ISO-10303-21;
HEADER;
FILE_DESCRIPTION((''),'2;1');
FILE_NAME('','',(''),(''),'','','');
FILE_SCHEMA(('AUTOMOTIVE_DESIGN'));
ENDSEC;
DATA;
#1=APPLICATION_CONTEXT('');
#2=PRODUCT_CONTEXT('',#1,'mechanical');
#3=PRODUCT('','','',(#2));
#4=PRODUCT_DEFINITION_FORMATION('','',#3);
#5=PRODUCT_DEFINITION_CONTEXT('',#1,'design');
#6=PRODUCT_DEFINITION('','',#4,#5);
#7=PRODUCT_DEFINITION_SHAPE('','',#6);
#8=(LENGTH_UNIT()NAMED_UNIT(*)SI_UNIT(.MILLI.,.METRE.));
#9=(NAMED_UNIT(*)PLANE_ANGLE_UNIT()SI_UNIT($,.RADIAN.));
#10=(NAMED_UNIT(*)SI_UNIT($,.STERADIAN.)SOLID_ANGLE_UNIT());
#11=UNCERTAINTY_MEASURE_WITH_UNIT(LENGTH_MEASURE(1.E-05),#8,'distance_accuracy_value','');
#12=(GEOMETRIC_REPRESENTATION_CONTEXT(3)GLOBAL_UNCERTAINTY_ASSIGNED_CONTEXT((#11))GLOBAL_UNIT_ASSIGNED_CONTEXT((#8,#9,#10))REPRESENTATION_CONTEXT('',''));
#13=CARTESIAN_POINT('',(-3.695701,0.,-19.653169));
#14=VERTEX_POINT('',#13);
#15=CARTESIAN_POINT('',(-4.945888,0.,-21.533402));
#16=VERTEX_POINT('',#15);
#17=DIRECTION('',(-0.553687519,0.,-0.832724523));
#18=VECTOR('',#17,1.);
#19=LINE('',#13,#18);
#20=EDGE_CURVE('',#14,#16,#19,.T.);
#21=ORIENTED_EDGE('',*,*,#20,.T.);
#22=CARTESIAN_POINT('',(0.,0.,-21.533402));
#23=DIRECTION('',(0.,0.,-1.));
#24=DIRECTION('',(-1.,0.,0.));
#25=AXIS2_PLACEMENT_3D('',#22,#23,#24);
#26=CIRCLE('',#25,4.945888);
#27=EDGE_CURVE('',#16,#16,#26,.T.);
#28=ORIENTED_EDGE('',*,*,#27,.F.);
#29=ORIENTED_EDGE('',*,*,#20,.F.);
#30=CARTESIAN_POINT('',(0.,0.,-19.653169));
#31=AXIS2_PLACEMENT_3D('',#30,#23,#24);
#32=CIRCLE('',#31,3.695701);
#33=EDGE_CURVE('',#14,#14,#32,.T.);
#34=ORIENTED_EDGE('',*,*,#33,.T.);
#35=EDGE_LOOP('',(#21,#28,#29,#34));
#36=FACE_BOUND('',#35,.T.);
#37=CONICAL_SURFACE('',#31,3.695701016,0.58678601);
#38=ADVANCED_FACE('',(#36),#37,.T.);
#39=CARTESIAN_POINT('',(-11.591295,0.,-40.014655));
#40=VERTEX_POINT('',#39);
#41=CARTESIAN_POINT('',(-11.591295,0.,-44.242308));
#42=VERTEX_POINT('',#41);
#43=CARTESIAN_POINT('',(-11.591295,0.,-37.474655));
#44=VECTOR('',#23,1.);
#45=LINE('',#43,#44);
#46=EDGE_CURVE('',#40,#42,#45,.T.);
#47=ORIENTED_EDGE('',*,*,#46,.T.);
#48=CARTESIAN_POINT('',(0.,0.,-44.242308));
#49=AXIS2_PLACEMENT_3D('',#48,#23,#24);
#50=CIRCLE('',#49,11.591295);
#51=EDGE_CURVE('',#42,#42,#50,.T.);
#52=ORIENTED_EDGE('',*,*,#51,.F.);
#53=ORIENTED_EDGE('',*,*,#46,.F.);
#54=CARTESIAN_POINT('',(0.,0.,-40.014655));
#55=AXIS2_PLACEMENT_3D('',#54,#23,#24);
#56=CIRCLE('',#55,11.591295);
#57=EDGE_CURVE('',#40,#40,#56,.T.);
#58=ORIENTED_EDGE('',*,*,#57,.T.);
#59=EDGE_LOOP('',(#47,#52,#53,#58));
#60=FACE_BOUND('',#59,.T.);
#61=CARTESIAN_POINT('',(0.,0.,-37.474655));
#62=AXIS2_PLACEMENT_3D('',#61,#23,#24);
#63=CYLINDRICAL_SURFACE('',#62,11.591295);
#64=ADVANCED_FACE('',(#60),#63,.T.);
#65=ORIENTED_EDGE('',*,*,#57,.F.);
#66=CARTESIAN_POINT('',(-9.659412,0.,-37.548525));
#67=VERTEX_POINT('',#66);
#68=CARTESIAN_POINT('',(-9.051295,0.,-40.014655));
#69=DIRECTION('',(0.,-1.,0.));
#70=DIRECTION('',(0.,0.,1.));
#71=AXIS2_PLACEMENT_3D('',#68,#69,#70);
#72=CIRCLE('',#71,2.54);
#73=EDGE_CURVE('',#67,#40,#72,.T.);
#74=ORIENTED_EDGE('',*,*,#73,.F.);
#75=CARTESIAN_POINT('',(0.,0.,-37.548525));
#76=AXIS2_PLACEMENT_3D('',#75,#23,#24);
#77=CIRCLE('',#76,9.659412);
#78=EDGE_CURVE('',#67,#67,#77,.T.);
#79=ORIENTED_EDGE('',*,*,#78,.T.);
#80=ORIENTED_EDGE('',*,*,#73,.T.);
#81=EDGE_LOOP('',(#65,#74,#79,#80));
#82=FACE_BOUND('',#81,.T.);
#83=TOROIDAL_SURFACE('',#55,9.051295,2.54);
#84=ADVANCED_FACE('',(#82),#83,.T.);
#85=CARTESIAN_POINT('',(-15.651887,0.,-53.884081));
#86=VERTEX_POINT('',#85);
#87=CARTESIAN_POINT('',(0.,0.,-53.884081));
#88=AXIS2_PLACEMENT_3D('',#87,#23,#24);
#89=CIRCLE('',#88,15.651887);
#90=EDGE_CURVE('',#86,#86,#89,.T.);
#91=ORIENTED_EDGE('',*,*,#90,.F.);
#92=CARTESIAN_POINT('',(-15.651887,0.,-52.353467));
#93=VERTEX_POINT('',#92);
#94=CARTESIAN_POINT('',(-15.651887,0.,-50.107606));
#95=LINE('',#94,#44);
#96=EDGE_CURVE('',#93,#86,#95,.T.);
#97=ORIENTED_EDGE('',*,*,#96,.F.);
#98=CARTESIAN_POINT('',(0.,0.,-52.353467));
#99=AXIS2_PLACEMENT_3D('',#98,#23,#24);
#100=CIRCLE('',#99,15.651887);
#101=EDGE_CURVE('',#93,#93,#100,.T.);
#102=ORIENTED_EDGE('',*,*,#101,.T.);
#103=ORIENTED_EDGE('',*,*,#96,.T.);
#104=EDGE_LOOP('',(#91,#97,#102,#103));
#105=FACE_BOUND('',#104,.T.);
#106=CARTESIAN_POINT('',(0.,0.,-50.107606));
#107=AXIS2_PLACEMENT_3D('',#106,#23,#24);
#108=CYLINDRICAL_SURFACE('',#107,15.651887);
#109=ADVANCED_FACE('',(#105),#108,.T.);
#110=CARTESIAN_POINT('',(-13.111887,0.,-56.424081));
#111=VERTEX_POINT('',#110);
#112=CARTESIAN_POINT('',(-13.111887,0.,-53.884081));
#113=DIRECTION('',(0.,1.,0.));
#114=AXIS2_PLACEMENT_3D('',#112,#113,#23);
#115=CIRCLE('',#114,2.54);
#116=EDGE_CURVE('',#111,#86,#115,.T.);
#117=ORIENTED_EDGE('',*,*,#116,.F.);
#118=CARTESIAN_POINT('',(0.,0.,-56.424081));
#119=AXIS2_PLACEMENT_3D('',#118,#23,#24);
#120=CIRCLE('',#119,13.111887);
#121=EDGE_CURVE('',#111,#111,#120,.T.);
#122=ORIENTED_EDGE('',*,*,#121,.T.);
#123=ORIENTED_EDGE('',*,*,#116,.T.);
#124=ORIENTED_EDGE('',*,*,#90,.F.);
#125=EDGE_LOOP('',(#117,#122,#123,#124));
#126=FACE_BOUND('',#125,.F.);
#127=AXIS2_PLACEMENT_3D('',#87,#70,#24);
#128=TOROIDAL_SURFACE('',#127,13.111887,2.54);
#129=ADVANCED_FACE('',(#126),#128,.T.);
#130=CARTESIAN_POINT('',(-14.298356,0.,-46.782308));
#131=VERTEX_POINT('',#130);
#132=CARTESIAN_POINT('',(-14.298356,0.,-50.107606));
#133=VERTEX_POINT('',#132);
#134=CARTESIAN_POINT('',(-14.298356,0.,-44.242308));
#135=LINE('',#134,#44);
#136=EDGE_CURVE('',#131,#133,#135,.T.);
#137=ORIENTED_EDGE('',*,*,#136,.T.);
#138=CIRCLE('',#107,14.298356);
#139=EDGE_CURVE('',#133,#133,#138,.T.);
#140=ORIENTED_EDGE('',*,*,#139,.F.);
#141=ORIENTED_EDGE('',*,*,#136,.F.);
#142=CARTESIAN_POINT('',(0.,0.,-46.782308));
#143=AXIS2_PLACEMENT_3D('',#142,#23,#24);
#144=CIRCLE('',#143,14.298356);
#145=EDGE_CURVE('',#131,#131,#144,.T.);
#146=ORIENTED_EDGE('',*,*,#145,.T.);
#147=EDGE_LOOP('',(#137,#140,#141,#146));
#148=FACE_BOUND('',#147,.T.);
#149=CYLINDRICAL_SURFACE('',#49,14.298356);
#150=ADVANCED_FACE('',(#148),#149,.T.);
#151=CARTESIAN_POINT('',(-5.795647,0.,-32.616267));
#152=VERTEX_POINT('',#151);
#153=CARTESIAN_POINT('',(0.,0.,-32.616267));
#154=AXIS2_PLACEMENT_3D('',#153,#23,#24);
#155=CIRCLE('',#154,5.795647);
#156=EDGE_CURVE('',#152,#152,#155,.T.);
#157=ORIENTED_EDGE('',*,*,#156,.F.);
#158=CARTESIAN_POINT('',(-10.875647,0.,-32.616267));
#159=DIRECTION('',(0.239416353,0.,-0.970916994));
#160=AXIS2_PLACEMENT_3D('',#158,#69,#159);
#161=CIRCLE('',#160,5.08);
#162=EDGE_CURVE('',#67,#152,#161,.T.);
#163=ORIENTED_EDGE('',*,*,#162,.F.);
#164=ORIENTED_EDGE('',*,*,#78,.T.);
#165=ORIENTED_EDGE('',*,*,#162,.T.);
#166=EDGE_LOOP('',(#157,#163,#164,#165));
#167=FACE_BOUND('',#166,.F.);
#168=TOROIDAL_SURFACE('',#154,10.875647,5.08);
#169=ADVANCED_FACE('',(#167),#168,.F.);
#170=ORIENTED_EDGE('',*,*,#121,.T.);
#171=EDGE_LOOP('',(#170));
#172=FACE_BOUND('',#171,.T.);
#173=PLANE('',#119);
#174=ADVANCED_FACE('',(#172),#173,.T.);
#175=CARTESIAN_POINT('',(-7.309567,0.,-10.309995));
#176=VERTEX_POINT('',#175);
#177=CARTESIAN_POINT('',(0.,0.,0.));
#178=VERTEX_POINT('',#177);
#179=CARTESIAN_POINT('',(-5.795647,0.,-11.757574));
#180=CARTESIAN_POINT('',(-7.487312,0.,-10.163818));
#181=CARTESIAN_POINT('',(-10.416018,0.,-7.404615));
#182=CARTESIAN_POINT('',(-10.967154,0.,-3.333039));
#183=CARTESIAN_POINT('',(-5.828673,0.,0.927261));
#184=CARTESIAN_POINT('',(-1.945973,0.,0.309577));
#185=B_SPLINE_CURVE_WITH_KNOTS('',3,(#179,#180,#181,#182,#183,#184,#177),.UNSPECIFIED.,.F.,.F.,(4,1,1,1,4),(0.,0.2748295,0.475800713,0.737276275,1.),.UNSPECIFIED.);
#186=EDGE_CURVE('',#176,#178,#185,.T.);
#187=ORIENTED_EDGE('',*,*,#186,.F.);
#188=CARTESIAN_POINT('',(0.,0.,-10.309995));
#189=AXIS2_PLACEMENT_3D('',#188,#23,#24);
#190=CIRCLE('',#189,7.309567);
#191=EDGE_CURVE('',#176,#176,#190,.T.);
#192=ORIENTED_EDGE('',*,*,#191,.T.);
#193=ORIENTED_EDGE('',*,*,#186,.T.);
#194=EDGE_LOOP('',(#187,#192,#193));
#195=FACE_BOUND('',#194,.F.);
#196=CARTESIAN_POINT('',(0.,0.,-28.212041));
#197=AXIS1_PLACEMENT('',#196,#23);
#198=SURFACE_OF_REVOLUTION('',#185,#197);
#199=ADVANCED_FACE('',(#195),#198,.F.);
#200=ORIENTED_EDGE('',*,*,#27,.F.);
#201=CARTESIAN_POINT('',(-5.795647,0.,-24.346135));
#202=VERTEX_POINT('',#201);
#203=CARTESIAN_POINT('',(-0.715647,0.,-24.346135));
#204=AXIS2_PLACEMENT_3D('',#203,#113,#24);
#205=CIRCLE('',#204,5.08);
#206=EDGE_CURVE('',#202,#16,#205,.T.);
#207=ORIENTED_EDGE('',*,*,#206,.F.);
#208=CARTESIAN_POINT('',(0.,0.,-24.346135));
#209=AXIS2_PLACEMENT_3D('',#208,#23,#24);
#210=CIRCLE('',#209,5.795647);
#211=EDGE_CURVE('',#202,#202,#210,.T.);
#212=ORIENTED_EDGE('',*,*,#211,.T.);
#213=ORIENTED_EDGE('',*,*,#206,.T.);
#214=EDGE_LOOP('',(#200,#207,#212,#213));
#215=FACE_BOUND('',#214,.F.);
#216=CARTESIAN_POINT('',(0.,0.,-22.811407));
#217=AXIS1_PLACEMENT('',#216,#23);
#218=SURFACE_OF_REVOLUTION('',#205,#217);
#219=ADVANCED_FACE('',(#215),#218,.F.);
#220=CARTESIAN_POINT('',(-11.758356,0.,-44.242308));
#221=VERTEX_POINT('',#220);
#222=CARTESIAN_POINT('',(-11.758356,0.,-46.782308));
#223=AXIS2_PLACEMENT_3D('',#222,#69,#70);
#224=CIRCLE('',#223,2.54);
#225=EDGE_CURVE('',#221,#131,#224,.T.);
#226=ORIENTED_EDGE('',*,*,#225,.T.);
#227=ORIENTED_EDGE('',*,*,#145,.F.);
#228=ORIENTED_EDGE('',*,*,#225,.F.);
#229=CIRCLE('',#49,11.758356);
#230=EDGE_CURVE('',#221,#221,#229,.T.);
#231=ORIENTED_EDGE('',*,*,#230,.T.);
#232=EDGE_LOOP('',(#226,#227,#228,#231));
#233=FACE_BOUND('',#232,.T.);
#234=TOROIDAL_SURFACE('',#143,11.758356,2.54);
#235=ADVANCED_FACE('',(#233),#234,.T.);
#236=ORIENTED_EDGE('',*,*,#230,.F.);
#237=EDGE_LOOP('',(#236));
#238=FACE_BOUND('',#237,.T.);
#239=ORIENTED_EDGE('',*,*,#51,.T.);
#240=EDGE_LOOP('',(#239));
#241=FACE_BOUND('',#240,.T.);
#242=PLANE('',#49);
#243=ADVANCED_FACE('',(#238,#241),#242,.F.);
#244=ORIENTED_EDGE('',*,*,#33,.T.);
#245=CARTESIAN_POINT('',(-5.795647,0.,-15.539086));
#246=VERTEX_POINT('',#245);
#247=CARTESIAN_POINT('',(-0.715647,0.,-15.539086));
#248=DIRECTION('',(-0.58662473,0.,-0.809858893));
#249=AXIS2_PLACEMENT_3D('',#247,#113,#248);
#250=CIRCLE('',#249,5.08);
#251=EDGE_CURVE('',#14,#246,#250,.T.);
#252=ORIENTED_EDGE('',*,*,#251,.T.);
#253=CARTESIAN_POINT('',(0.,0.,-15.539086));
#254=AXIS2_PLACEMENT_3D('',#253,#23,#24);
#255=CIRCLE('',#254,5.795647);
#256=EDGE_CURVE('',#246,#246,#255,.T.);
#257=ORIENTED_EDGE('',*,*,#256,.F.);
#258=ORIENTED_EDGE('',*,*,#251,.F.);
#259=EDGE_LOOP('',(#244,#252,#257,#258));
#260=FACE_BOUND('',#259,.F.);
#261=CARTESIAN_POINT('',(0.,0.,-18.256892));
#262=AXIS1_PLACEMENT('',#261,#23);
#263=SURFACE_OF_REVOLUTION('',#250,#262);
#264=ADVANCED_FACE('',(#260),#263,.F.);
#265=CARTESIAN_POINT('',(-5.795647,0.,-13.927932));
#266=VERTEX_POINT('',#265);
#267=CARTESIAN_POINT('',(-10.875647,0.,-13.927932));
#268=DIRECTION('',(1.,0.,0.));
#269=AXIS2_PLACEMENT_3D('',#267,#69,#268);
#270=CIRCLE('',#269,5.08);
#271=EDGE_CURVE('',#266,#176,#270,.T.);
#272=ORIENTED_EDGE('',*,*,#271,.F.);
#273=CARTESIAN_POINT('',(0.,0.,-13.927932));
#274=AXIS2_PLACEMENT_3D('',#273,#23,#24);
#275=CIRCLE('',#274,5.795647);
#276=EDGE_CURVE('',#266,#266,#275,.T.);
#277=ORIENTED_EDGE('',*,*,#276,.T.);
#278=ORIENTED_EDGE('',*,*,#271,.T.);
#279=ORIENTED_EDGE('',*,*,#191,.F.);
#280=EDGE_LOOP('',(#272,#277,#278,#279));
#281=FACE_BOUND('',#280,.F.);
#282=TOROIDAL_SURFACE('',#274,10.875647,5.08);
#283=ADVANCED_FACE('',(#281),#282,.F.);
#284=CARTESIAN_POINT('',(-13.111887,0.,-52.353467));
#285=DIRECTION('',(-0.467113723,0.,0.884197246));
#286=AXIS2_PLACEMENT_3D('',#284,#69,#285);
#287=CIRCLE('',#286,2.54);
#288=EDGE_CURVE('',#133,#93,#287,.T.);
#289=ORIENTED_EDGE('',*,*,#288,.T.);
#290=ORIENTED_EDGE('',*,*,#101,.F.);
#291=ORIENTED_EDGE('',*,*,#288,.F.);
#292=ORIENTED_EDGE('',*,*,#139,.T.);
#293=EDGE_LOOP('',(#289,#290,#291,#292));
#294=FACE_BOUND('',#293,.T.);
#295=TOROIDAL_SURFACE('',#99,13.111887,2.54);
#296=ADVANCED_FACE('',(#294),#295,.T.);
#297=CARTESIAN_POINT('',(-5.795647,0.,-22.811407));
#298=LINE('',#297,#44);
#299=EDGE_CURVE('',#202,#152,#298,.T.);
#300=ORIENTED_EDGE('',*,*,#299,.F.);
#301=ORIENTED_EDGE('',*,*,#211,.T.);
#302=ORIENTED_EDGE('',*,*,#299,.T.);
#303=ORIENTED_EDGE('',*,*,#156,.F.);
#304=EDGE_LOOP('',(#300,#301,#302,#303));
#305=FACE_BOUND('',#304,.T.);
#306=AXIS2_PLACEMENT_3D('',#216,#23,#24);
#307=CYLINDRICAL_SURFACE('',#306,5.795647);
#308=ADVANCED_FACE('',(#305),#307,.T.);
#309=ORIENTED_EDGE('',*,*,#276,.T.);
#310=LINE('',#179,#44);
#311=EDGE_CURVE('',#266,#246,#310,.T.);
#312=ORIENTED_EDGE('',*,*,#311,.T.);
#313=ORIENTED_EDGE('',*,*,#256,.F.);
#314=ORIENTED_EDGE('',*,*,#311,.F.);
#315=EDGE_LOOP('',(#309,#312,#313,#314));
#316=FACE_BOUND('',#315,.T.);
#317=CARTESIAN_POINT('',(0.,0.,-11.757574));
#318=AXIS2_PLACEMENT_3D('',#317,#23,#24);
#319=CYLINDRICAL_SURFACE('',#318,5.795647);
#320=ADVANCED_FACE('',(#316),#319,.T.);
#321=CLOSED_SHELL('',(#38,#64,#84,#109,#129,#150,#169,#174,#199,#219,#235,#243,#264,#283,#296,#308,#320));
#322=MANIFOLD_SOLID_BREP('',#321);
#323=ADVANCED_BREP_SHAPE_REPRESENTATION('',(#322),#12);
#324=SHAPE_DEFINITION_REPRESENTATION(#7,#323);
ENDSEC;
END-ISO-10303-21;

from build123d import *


# Not quite as in the source:
# - a fillet or chamfer that OpenCascade refuses, or shapes differently, is made with other operations: its cross-section is extruded or revolved along the edge and cut away or added


with BuildPart() as f1:
    # F0 (on Front) → F1 (revolve)
    with BuildSketch(Plane.XZ):
        Polygon((-15.6518872827, -56.4240813255), (0, -56.4240813255), (0, -50.1076057553), (-14.2983561382, -50.1076057553), (-15.6518872827, -50.1076057553), align=None)
        Polygon((-14.2983561382, -50.1076057553), (0, -50.1076057553), (0, -44.2423075438), (-11.5912947804, -44.2423075438), (-14.2983561382, -44.2423075438), align=None)
        Polygon((-11.5912947804, -44.2423075438), (0, -44.2423075438), (0, -37.4746546149), (-5.7956473902, -37.4746546149), (-11.5912947804, -37.4746546149), align=None)
        with BuildLine():
            Line((-5.7956473902, -37.4746546149), (0, -37.4746546149))
            Line((0, -37.4746546149), (0, -11.7575740442))
            add(Edge.make_bspline(
                [(-5.7956473902, -11.7575740442), (-3.8637649268, -11.7575740442), (-1.9318824634, -11.7575740442), (0, -11.7575740442)],
                knots=[0, 0, 0, 0, 5.7956473902, 5.7956473902, 5.7956473902, 5.7956473902], degree=3))
            Line((-5.7956473902, -11.7575740442), (-5.7956473902, -18.2568924401))
            Line((-5.7956473902, -18.2568924401), (-3.6957010161, -19.6531694382))
            Line((-3.6957010161, -19.6531694382), (-5.7956473902, -22.8114072233))
            Line((-5.7956473902, -22.8114072233), (-5.7956473902, -37.4746546149))
        make_face()
        with BuildLine():
            add(Edge.make_bspline(
                [(-5.7956473902, -11.7575740442), (-3.8637649268, -11.7575740442), (-1.9318824634, -11.7575740442), (0, -11.7575740442)],
                knots=[0, 0, 0, 0, 5.7956473902, 5.7956473902, 5.7956473902, 5.7956473902], degree=3))
            Line((0, -11.7575740442), (0, 0))
            add(Edge.make_bspline(
                [(-5.7956473902, -11.7575740442), (-7.4873116025, -10.1638177583), (-10.4160184448, -7.4046147761), (-10.9671540458, -3.3330390808), (-5.8286728705, 0.9272611073), (-1.9459726357, 0.3095772882), (0, 0)],
                knots=[0, 0, 0, 0, 0.2748295004, 0.475800713, 0.7372762752, 1, 1, 1, 1], degree=3))
        make_face()
    revolve(axis=Axis((0, 0, -28.2120406628), (0, 0, -1)))

    # F2: fillet of radius 2.54 on 5 edges, made by hand

    # F2_s1 → F2_t2 (revolve, cut)
    with BuildSketch(Plane.XZ):
        with BuildLine():
            ThreePointArc((-9.0512947804, -37.4746546149), (-10.8473460046, -38.2186033907), (-11.5912947804, -40.0146546149))
            Line((-11.5912947804, -40.0146546149), (-11.5912947804, -37.4746546149))
            Line((-11.5912947804, -37.4746546149), (-9.0512947804, -37.4746546149))
        make_face()
    revolve(axis=Axis((0, 0, -37.4746546149), (0, 0, -1)), mode=Mode.SUBTRACT)

    # F2_s3 → F2_t4 (revolve, cut)
    with BuildSketch(Plane.XZ):
        with BuildLine():
            ThreePointArc((-14.2983561382, -50.1076057553), (-15.2873448085, -51.0423662482), (-15.6518872827, -52.3534667606))
            Line((-15.6518872827, -52.3534667606), (-15.6518872827, -50.1076057553))
            Line((-15.6518872827, -50.1076057553), (-14.2983561382, -50.1076057553))
        make_face()
    revolve(axis=Axis((0, 0, -50.1076057553), (0, 0, -1)), mode=Mode.SUBTRACT)

    # F2_s5 → F2_t6 (revolve, cut)
    with BuildSketch(Plane.XZ):
        with BuildLine():
            ThreePointArc((-13.1118872827, -56.4240813255), (-14.9079385069, -55.6801325497), (-15.6518872827, -53.8840813255))
            Line((-15.6518872827, -53.8840813255), (-15.6518872827, -56.4240813255))
            Line((-15.6518872827, -56.4240813255), (-13.1118872827, -56.4240813255))
        make_face()
    revolve(axis=Axis((0, 0, -56.4240813255), (0, 0, -1)), mode=Mode.SUBTRACT)

    # F2_s7 → F2_t8 (revolve, cut)
    with BuildSketch(Plane.XZ):
        with BuildLine():
            ThreePointArc((-11.7583561382, -44.2423075438), (-13.5544073624, -44.9862563195), (-14.2983561382, -46.7823075438))
            Line((-14.2983561382, -46.7823075438), (-14.2983561382, -44.2423075438))
            Line((-14.2983561382, -44.2423075438), (-11.7583561382, -44.2423075438))
        make_face()
    revolve(axis=Axis((0, 0, -44.2423075438), (0, 0, -1)), mode=Mode.SUBTRACT)

    # F3: fillet of radius 5.08 on 6 edges, made by hand

    # F3_s1 → F3_t2 (revolve)
    with BuildSketch(Plane.XZ):
        with BuildLine():
            ThreePointArc((-9.659412317, -37.5485254493), (-6.8765928662, -35.7489916373), (-5.7956473902, -32.616267118))
            Line((-5.7956473902, -32.616267118), (-5.2876473902, -32.616267118))
            Line((-5.2876473902, -32.616267118), (-5.2876473902, -37.4746546149))
            Line((-5.2876473902, -37.4746546149), (-5.7956473902, -37.9826546149))
            ThreePointArc((-5.7956473902, -37.9826546149), (-9.0512947804, -37.9826546149), (-9.5377888097, -38.0417512824))
            Line((-9.5377888097, -38.0417512824), (-9.659412317, -37.5485254493))
        make_face()
    revolve(axis=Axis((0, 0, -37.4746546149), (0, 0, -1)))

    # F3_s3 → F3_t4 (revolve)
    with BuildSketch(Plane.XZ):
        with BuildLine():
            ThreePointArc((-5.7956473902, -13.9279319037), (-6.1893860399, -11.9669743425), (-7.3095665071, -10.309995042))
            Line((-7.3095665071, -10.309995042), (-7.2382448894, -10.2376363048))
            ThreePointArc((-7.2382448894, -10.2376363048), (-6.4865657886, -10.9644490522), (-5.7259772163, -11.6836238794))
            Line((-5.7259772163, -11.6836238794), (-5.6940473902, -11.7575740442))
            Line((-5.6940473902, -11.7575740442), (-5.6940473902, -13.9279319037))
            Line((-5.6940473902, -13.9279319037), (-5.7956473902, -13.9279319037))
        make_face()
    revolve(axis=Axis((0, 0, -11.7575740442), (0, 0, -1)))

    # F3_s5 → F3_t6 (revolve, cut)
    with BuildSketch(Plane.XZ):
        with BuildLine():
            ThreePointArc((-5.7956473902, -24.3461346524), (-5.5785694611, -22.8769890052), (-4.945887968, -21.5334020568))
            Line((-4.945887968, -21.5334020568), (-5.0304927795, -21.4771474049))
            Line((-5.0304927795, -21.4771474049), (-5.8972473902, -22.7807126748))
            Line((-5.8972473902, -22.7807126748), (-5.8972473902, -24.3461346524))
            Line((-5.8972473902, -24.3461346524), (-5.7956473902, -24.3461346524))
        make_face()
    revolve(axis=Axis((0, 0, -22.8114072233), (0, 0, -1)), mode=Mode.SUBTRACT)

    # F3_s7 → F3_t8 (revolve, cut)
    with BuildSketch(Plane.XZ):
        with BuildLine():
            ThreePointArc((-3.6957010161, -19.6531694382), (-5.2403060745, -17.8486021825), (-5.7956473902, -15.5390862613))
            Line((-5.7956473902, -15.5390862613), (-5.8972473902, -15.5390862613))
            Line((-5.8972473902, -15.5390862613), (-5.8972473902, -18.2568924401))
            Line((-5.8972473902, -18.2568924401), (-5.8519020421, -18.3414972517))
            ThreePointArc((-5.8519020421, -18.3414972517), (-4.8019288551, -19.0396357507), (-3.7553020886, -19.7354511018))
            Line((-3.7553020886, -19.7354511018), (-3.6957010161, -19.6531694382))
        make_face()
    revolve(axis=Axis((0, 0, -18.2568924401), (0, 0, -1)), mode=Mode.SUBTRACT)


solid = f1.part
